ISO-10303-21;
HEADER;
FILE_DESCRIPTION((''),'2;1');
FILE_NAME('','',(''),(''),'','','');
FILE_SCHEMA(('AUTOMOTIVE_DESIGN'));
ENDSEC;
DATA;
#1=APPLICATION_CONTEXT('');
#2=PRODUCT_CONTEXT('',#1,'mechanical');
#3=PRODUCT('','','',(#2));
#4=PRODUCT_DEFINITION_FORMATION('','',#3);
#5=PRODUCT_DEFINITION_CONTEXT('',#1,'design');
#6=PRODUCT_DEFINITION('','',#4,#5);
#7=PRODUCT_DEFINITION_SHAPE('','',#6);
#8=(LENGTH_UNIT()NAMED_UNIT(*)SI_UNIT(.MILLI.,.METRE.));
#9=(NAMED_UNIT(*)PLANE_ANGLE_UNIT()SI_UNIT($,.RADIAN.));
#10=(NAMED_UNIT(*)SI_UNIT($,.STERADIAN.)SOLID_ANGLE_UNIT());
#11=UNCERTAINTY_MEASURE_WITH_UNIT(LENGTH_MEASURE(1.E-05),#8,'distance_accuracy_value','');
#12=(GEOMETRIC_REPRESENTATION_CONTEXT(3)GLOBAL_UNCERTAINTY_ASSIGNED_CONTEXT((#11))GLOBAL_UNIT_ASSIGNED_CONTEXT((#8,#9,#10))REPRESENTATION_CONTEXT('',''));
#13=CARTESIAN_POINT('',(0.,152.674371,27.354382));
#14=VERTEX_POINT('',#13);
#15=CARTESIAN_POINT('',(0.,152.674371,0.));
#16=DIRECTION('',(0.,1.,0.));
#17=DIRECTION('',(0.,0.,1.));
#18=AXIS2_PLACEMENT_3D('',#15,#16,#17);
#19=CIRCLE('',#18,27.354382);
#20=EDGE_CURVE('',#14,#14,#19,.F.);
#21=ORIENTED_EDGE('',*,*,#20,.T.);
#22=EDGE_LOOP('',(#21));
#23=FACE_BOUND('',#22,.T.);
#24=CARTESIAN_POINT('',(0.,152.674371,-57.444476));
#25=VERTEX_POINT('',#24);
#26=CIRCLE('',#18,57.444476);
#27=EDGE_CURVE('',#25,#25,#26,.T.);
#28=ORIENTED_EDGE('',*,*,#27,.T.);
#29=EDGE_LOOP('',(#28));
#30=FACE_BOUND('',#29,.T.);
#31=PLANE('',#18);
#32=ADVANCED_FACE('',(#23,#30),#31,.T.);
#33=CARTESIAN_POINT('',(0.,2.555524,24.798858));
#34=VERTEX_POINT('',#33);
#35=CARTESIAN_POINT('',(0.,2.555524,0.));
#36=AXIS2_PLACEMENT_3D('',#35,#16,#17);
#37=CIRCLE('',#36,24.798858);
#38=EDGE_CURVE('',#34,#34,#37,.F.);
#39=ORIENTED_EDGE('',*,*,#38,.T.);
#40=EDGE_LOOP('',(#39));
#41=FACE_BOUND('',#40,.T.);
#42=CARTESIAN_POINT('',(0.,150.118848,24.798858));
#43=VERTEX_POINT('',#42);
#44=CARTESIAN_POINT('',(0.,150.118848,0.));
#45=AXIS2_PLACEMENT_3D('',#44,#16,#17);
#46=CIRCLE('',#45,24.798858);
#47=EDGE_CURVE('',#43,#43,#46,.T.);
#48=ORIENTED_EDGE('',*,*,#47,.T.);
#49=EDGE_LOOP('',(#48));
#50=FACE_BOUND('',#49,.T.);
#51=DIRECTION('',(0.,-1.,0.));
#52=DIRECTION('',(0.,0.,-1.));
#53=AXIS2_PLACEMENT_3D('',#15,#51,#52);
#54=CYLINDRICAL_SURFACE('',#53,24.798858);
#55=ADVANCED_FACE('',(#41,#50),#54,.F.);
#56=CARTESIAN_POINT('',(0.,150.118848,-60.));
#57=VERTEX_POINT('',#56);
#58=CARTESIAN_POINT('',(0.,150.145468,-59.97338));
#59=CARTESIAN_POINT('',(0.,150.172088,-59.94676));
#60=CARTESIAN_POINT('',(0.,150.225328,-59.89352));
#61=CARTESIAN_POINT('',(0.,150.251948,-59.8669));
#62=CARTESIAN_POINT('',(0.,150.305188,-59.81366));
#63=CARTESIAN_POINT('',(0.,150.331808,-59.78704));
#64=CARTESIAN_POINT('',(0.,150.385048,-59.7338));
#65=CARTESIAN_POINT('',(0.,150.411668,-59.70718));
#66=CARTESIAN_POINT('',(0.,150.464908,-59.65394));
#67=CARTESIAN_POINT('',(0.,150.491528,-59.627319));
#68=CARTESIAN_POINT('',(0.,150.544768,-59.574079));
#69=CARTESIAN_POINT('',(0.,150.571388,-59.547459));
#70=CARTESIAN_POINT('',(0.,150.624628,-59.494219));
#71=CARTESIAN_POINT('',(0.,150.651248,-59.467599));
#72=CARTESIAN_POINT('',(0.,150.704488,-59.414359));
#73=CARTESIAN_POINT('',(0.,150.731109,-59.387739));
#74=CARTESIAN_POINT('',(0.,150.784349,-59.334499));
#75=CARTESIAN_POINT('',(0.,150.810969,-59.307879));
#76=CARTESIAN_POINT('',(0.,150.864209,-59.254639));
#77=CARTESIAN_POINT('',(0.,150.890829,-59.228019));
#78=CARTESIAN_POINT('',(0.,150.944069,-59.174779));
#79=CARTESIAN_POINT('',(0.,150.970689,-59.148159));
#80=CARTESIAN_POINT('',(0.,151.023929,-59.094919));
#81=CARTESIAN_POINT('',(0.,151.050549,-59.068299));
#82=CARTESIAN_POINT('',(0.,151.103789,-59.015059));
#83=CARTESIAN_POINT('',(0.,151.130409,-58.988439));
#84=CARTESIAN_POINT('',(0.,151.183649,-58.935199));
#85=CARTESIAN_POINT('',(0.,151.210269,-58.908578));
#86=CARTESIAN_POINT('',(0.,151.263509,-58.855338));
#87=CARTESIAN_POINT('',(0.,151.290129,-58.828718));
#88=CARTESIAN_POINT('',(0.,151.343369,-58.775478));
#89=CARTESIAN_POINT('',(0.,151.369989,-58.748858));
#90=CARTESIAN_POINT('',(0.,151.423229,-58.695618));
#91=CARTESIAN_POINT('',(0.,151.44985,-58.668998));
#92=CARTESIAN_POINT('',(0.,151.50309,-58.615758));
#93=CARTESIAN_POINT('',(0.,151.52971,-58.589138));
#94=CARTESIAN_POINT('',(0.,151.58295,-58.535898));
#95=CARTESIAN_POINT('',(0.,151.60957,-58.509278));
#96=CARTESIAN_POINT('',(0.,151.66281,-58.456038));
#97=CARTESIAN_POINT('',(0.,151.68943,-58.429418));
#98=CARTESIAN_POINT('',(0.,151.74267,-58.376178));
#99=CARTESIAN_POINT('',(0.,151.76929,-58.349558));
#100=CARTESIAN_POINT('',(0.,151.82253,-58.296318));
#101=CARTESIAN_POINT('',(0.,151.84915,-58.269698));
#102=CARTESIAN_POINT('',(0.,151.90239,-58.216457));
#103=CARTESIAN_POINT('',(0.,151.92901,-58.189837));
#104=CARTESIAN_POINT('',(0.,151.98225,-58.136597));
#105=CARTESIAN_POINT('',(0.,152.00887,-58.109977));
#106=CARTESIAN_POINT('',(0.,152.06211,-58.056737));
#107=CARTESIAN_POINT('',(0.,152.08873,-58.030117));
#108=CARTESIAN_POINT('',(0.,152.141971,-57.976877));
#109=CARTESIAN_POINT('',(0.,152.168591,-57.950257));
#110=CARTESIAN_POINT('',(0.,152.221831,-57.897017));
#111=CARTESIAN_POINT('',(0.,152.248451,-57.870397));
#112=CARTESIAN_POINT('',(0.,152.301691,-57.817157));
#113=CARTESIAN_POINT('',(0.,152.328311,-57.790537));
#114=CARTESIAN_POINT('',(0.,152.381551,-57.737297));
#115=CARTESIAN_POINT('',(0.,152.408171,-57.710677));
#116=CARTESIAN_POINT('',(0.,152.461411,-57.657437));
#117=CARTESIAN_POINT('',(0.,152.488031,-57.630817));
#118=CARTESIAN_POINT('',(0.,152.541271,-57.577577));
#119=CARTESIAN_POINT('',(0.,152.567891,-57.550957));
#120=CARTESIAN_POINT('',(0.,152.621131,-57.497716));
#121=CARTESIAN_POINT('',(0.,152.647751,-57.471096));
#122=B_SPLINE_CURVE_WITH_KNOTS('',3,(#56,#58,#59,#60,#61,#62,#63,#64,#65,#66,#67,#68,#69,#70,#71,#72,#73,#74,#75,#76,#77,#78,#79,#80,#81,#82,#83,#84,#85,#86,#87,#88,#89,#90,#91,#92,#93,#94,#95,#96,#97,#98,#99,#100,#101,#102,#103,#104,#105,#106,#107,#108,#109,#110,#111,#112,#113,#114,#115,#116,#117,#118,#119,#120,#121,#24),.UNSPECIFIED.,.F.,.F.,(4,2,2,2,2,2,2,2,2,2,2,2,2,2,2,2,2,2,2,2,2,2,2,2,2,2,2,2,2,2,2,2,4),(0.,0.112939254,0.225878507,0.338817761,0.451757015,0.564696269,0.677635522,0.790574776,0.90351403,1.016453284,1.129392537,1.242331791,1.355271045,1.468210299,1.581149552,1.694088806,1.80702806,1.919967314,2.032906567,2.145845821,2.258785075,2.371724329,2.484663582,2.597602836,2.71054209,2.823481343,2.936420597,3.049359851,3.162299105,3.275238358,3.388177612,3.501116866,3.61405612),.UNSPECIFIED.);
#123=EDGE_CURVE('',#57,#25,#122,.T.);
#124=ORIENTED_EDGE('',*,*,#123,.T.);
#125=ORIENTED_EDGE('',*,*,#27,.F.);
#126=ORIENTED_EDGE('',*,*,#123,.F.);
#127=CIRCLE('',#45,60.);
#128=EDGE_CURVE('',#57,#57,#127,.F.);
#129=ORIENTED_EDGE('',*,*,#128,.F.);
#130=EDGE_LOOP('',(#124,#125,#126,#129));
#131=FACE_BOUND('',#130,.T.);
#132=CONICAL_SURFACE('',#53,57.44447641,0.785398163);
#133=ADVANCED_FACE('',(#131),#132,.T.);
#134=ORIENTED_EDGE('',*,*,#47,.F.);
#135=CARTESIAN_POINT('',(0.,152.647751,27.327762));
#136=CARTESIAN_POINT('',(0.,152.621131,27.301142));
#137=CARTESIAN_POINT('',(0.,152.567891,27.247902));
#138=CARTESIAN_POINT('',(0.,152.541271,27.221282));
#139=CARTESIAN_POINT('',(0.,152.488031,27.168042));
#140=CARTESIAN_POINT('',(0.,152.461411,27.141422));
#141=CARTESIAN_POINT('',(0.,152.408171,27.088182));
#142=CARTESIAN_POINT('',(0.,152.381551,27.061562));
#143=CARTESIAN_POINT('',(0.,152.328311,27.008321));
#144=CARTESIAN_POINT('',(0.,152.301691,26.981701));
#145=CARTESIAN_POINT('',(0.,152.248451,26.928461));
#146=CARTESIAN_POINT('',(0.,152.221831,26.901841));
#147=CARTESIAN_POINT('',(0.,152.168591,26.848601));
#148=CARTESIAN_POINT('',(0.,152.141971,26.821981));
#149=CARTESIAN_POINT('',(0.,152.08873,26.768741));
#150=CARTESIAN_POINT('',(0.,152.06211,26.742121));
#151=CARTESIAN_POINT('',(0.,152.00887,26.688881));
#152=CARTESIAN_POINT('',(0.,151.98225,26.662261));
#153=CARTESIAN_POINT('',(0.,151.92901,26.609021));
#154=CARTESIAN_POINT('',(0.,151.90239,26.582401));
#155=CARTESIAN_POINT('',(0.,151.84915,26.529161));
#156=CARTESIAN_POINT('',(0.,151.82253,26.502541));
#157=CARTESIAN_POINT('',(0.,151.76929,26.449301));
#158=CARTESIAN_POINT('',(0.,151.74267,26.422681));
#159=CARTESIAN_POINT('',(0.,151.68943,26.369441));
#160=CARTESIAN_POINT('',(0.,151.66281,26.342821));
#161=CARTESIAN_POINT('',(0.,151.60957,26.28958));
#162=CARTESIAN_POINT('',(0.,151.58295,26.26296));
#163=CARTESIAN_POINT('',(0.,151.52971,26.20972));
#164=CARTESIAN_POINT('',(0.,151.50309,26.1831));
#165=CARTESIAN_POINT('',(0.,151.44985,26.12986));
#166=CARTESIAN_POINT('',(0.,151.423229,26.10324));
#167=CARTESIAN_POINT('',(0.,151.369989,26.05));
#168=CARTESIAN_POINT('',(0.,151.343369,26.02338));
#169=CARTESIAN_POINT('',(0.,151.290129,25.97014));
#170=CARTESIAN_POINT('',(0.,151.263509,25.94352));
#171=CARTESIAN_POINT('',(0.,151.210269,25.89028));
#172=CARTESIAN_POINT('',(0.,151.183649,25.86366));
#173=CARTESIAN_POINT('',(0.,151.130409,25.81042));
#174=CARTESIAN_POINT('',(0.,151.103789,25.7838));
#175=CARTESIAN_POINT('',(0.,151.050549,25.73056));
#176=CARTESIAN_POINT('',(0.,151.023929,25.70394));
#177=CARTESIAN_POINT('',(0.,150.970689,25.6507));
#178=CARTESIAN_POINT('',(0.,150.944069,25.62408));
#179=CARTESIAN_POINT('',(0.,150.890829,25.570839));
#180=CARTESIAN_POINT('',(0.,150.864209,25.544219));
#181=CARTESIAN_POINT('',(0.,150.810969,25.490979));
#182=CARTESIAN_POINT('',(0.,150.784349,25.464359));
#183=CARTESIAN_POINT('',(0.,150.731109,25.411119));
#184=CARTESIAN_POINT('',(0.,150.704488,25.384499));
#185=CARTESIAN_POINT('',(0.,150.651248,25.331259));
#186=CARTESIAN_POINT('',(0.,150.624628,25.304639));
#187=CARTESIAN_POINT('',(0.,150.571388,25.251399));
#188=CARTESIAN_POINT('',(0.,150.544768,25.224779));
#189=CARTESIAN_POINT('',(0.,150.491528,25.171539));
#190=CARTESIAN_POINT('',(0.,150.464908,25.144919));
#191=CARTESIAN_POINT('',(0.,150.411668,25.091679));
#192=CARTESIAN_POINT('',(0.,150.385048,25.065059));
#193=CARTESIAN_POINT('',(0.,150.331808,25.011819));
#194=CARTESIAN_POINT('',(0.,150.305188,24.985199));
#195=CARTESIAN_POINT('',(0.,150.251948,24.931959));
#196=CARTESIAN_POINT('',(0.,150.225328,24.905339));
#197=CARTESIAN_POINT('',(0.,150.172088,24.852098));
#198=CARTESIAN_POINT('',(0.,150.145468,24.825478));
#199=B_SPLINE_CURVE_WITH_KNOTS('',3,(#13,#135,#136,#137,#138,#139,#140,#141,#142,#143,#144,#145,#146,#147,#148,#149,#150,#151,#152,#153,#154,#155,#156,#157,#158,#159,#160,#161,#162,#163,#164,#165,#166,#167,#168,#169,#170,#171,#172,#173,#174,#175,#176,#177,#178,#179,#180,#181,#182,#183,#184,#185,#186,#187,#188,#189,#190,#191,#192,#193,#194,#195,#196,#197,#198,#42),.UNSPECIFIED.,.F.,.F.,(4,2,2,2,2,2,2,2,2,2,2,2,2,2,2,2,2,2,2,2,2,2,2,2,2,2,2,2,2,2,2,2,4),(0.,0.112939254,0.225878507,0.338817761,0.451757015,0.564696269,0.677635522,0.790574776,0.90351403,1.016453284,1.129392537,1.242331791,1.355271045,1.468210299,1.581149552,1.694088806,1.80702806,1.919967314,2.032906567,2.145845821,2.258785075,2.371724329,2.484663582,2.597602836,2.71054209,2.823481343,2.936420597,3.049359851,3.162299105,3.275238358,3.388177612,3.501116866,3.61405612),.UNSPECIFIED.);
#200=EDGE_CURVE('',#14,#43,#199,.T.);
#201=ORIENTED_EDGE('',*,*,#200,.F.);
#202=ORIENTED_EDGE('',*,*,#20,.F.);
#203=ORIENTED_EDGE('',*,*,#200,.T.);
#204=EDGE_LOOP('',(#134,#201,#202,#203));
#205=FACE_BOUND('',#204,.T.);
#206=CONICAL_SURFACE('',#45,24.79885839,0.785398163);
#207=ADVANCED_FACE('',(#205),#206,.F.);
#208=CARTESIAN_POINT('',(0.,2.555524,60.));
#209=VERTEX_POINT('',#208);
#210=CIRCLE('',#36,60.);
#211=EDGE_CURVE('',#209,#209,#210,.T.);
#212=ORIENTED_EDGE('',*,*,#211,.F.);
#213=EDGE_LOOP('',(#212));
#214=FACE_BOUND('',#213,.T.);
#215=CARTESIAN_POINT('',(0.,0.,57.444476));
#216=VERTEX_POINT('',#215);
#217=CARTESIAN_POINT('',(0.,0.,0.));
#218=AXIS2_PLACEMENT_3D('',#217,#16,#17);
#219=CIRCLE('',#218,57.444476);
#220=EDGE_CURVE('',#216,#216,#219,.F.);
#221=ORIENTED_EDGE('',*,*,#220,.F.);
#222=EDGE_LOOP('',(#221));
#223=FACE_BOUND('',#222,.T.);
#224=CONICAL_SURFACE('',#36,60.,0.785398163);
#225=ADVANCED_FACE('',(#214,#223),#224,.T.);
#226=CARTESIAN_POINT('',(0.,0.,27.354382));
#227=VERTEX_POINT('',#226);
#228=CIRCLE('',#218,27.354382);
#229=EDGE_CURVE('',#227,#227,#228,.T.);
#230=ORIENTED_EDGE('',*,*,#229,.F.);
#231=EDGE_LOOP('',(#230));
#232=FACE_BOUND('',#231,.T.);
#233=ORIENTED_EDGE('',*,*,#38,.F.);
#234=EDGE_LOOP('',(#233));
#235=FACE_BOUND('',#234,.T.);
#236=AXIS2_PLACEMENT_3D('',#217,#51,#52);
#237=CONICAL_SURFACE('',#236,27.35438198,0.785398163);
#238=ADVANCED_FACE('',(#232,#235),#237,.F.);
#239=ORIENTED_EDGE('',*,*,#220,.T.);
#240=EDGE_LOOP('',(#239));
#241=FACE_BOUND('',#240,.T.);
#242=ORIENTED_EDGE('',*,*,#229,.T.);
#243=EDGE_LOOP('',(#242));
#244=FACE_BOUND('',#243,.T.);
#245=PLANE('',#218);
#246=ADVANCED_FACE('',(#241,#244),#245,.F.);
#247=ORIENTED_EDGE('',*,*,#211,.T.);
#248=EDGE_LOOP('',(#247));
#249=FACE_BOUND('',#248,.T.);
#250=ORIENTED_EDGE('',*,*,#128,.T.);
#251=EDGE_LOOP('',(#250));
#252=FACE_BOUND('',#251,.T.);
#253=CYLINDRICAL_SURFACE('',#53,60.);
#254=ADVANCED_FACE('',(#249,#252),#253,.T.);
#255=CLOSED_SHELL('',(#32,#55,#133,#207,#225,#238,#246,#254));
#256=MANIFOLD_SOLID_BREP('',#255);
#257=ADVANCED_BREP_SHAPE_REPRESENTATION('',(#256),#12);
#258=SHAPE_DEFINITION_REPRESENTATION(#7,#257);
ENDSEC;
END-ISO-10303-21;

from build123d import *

# Parameters (mm, degrees)
SKETCH1_R           = 60
BOSS_EXTRUDE1_DEPTH = 152.674371253
SKETCH2_R           = 24.79885839
CUT_EXTRUDE1_DEPTH  = 175.66958418
CHAMFER1_SIZE       = 2.55552359


with BuildPart() as part:
    # Sketch1 → Boss-Extrude1 (new body)
    with BuildSketch(Plane(origin=(0, 0, 0), x_dir=(1, 0, 0), z_dir=(0, 1, 0))):
        Circle(SKETCH1_R)
    extrude(amount=BOSS_EXTRUDE1_DEPTH)

    # Sketch2 → Cut-Extrude1 (cut, through all)
    with BuildSketch(Plane(origin=(0, 0, 0), x_dir=(1, 0, 0), z_dir=(0, 1, 0))):
        Circle(SKETCH2_R)
    extrude(amount=CUT_EXTRUDE1_DEPTH, mode=Mode.SUBTRACT)

    # Chamfer1
    chamfer1_edges = [part.edges().sort_by_distance(p)[0] for p in [
        (-24.79885839, 152.674371253, 0),
        (-24.79885839, 0, 0),
        (-60, 0, 0),
        (-60, 152.674371253, 0),
    ]]
    chamfer(chamfer1_edges, length=CHAMFER1_SIZE)


solid = part.part
